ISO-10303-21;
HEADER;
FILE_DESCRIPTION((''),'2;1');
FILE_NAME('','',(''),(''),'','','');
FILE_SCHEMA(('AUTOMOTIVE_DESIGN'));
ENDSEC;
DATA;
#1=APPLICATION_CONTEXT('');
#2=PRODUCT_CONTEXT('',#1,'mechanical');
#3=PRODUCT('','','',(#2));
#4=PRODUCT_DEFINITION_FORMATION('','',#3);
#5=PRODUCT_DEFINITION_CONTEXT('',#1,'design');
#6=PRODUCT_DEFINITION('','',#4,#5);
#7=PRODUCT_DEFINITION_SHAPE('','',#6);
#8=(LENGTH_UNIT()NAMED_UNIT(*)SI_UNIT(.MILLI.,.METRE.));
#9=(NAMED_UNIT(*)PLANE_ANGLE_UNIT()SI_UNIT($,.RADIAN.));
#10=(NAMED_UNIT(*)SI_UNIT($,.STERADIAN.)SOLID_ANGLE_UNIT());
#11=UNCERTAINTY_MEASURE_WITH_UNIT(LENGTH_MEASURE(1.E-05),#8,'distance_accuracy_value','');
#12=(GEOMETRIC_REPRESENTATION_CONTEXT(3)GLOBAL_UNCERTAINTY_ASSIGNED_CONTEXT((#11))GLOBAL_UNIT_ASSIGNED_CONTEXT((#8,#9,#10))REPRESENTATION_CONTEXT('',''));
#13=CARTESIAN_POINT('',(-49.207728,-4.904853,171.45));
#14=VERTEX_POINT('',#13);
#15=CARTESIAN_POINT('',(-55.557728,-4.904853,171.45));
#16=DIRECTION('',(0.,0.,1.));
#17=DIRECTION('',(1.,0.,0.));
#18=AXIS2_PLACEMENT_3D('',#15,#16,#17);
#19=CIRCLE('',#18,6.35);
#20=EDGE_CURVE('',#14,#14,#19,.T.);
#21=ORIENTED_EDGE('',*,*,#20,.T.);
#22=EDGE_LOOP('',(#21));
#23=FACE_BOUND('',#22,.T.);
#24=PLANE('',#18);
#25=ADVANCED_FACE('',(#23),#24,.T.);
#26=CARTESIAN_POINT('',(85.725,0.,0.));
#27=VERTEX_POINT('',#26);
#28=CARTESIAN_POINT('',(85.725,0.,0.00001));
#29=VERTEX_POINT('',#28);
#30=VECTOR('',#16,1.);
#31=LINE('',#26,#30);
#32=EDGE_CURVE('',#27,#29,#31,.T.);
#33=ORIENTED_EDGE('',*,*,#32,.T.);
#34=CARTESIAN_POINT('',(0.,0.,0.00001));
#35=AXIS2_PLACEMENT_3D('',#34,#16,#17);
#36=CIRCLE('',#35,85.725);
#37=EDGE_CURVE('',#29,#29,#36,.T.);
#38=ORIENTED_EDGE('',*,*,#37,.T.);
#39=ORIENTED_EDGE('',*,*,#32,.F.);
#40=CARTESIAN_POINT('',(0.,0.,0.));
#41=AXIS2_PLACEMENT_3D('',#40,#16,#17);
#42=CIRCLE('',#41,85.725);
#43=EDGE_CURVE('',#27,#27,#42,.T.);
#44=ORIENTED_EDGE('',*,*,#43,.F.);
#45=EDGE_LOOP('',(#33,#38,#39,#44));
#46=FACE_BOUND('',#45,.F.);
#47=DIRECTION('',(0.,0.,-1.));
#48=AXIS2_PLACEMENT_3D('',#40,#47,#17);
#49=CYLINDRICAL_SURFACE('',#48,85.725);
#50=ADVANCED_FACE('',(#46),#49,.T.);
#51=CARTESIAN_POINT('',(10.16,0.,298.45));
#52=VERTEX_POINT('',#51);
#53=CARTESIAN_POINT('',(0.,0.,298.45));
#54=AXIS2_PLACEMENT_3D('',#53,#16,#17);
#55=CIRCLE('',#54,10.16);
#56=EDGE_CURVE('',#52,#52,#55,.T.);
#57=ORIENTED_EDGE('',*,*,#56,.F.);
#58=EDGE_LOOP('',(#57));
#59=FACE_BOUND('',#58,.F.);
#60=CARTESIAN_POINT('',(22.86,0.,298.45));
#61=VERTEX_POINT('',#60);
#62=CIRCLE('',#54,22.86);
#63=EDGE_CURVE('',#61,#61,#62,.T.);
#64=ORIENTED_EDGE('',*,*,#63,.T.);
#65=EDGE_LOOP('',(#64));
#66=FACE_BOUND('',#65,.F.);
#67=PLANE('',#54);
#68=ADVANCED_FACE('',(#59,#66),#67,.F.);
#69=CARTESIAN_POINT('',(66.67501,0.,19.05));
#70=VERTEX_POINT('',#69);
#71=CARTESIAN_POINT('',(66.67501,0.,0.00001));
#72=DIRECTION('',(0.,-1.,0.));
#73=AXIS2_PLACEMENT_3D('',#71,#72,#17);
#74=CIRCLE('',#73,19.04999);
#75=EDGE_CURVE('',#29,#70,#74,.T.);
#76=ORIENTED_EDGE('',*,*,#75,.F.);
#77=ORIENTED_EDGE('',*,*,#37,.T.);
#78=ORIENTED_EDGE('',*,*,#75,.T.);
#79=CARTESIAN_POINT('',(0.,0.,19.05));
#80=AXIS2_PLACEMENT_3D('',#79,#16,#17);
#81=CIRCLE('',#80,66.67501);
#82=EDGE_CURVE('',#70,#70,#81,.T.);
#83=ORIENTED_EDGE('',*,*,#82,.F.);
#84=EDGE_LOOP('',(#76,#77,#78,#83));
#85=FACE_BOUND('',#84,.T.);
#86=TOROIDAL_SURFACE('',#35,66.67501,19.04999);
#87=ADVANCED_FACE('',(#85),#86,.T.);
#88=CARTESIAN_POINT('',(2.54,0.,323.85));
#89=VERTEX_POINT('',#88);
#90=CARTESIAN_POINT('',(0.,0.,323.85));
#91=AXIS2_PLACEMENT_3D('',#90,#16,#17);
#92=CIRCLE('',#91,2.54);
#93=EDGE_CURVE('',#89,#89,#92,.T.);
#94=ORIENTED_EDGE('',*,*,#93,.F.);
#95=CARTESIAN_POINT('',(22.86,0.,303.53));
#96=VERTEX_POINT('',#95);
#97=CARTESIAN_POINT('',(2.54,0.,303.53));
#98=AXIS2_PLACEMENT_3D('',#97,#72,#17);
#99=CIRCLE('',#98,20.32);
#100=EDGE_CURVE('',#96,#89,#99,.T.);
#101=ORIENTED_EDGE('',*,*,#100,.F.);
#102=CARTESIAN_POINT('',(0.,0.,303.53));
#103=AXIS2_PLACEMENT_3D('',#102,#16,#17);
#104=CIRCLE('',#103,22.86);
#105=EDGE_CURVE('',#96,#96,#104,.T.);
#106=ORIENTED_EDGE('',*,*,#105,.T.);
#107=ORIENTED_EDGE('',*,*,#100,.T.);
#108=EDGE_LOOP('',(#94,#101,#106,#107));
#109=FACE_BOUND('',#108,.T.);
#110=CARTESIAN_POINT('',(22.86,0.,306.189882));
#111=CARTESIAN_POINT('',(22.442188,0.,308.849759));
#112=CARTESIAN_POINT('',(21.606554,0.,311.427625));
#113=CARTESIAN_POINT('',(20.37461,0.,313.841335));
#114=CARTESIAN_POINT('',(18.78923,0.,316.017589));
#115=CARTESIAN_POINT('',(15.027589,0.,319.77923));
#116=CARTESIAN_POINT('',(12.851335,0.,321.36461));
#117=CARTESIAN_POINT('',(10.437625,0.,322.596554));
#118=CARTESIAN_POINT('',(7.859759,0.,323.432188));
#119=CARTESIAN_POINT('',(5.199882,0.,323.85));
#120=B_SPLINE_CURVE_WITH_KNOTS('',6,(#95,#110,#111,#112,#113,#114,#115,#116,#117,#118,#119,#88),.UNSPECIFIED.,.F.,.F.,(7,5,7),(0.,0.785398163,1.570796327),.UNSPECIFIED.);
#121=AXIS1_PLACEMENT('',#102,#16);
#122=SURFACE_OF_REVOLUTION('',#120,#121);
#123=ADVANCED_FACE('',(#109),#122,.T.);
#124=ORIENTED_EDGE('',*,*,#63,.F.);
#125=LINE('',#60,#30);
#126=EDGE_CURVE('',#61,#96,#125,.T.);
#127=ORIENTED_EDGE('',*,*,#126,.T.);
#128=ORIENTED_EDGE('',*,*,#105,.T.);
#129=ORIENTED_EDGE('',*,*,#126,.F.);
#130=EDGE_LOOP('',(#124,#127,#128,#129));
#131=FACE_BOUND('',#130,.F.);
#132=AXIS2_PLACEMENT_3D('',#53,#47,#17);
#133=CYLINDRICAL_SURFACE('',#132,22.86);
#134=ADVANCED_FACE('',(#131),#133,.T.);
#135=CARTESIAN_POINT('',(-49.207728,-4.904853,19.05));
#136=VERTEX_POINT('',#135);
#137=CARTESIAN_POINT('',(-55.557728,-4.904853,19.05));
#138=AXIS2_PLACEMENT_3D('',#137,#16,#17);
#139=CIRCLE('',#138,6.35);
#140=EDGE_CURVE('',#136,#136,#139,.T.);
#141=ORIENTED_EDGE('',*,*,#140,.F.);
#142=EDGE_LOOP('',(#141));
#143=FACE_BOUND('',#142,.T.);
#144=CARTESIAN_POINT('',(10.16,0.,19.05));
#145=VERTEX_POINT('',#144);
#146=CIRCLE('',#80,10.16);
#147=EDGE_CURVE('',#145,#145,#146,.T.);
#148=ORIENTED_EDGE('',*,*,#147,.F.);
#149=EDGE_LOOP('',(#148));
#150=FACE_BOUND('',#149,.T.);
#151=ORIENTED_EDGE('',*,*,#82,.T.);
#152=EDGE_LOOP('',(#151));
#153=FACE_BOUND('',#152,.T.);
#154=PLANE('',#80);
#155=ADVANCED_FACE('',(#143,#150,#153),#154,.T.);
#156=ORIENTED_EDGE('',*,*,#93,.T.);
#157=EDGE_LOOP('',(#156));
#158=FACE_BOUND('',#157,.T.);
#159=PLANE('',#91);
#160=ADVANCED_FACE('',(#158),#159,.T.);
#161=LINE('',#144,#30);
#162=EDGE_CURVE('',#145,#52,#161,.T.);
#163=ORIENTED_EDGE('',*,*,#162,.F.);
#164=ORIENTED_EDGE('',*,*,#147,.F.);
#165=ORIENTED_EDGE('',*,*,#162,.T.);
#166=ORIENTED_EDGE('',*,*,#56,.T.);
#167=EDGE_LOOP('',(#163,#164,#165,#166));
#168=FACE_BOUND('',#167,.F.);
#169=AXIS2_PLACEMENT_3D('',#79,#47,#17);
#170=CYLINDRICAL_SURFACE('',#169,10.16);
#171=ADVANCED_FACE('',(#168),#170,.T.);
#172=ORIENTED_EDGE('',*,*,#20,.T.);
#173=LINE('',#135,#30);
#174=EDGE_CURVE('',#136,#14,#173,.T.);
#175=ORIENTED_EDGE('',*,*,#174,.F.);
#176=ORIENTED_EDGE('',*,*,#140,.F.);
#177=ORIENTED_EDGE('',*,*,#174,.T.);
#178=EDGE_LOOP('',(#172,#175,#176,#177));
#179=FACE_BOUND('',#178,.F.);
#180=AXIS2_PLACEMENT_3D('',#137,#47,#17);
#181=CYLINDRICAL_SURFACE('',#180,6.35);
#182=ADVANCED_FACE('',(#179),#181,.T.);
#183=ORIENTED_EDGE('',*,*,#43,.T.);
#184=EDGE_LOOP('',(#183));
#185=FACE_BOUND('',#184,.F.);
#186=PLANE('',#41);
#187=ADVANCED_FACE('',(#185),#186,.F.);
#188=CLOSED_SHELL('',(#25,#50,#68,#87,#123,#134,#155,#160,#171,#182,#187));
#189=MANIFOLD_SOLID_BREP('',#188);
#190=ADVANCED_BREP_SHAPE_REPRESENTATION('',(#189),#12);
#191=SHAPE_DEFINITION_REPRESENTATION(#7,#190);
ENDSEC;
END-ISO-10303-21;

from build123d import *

# Parameters (mm, degrees)
F0_R     = 85.725
F1_DEPTH = 19.05
F2_R     = 19.04999
F3_R     = 10.16
F4_DEPTH = 279.4
F5_R     = 22.86
F6_DEPTH = 25.4
F7_R     = 20.32
F8_R     = 6.35
F9_DEPTH = 152.4


# Not quite as in the source:
# - a fillet or chamfer is up to 0.001 mm smaller than in the source, because OpenCascade refuses the exact size


with BuildPart() as f1:
    # F0 (on Top) → F1 (new body)
    with BuildSketch(Plane.XY):
        Circle(F0_R)
    extrude(amount=F1_DEPTH)

    # F2 (radius 19.05 in the source; OpenCascade refuses exactly that, so slightly less here)
    f2_edges = [f1.edges().sort_by_distance(p)[0] for p in [
        (-85.725, 0, 19.05),
    ]]
    fillet(f2_edges, radius=F2_R)

    # F3 (on face) → F4 (join)
    with BuildSketch(Plane.XY.offset(19.05)):
        Circle(F3_R)
    extrude(amount=F4_DEPTH)

    # F5 (on face) → F6 (join)
    with BuildSketch(Plane.XY.offset(298.45)):
        Circle(F5_R)
    extrude(amount=F6_DEPTH)

    # F7
    f7_edges = [f1.edges().sort_by_distance(p)[0] for p in [
        (-22.86, 0, 323.85),
    ]]
    fillet(f7_edges, radius=F7_R)

    # F8 (on face) → F9 (join)
    with BuildSketch(Plane.XY.offset(19.05)):
        with Locations((-55.5577278137, -4.9048527144)):
            Circle(F8_R)
    extrude(amount=F9_DEPTH)


solid = f1.part
